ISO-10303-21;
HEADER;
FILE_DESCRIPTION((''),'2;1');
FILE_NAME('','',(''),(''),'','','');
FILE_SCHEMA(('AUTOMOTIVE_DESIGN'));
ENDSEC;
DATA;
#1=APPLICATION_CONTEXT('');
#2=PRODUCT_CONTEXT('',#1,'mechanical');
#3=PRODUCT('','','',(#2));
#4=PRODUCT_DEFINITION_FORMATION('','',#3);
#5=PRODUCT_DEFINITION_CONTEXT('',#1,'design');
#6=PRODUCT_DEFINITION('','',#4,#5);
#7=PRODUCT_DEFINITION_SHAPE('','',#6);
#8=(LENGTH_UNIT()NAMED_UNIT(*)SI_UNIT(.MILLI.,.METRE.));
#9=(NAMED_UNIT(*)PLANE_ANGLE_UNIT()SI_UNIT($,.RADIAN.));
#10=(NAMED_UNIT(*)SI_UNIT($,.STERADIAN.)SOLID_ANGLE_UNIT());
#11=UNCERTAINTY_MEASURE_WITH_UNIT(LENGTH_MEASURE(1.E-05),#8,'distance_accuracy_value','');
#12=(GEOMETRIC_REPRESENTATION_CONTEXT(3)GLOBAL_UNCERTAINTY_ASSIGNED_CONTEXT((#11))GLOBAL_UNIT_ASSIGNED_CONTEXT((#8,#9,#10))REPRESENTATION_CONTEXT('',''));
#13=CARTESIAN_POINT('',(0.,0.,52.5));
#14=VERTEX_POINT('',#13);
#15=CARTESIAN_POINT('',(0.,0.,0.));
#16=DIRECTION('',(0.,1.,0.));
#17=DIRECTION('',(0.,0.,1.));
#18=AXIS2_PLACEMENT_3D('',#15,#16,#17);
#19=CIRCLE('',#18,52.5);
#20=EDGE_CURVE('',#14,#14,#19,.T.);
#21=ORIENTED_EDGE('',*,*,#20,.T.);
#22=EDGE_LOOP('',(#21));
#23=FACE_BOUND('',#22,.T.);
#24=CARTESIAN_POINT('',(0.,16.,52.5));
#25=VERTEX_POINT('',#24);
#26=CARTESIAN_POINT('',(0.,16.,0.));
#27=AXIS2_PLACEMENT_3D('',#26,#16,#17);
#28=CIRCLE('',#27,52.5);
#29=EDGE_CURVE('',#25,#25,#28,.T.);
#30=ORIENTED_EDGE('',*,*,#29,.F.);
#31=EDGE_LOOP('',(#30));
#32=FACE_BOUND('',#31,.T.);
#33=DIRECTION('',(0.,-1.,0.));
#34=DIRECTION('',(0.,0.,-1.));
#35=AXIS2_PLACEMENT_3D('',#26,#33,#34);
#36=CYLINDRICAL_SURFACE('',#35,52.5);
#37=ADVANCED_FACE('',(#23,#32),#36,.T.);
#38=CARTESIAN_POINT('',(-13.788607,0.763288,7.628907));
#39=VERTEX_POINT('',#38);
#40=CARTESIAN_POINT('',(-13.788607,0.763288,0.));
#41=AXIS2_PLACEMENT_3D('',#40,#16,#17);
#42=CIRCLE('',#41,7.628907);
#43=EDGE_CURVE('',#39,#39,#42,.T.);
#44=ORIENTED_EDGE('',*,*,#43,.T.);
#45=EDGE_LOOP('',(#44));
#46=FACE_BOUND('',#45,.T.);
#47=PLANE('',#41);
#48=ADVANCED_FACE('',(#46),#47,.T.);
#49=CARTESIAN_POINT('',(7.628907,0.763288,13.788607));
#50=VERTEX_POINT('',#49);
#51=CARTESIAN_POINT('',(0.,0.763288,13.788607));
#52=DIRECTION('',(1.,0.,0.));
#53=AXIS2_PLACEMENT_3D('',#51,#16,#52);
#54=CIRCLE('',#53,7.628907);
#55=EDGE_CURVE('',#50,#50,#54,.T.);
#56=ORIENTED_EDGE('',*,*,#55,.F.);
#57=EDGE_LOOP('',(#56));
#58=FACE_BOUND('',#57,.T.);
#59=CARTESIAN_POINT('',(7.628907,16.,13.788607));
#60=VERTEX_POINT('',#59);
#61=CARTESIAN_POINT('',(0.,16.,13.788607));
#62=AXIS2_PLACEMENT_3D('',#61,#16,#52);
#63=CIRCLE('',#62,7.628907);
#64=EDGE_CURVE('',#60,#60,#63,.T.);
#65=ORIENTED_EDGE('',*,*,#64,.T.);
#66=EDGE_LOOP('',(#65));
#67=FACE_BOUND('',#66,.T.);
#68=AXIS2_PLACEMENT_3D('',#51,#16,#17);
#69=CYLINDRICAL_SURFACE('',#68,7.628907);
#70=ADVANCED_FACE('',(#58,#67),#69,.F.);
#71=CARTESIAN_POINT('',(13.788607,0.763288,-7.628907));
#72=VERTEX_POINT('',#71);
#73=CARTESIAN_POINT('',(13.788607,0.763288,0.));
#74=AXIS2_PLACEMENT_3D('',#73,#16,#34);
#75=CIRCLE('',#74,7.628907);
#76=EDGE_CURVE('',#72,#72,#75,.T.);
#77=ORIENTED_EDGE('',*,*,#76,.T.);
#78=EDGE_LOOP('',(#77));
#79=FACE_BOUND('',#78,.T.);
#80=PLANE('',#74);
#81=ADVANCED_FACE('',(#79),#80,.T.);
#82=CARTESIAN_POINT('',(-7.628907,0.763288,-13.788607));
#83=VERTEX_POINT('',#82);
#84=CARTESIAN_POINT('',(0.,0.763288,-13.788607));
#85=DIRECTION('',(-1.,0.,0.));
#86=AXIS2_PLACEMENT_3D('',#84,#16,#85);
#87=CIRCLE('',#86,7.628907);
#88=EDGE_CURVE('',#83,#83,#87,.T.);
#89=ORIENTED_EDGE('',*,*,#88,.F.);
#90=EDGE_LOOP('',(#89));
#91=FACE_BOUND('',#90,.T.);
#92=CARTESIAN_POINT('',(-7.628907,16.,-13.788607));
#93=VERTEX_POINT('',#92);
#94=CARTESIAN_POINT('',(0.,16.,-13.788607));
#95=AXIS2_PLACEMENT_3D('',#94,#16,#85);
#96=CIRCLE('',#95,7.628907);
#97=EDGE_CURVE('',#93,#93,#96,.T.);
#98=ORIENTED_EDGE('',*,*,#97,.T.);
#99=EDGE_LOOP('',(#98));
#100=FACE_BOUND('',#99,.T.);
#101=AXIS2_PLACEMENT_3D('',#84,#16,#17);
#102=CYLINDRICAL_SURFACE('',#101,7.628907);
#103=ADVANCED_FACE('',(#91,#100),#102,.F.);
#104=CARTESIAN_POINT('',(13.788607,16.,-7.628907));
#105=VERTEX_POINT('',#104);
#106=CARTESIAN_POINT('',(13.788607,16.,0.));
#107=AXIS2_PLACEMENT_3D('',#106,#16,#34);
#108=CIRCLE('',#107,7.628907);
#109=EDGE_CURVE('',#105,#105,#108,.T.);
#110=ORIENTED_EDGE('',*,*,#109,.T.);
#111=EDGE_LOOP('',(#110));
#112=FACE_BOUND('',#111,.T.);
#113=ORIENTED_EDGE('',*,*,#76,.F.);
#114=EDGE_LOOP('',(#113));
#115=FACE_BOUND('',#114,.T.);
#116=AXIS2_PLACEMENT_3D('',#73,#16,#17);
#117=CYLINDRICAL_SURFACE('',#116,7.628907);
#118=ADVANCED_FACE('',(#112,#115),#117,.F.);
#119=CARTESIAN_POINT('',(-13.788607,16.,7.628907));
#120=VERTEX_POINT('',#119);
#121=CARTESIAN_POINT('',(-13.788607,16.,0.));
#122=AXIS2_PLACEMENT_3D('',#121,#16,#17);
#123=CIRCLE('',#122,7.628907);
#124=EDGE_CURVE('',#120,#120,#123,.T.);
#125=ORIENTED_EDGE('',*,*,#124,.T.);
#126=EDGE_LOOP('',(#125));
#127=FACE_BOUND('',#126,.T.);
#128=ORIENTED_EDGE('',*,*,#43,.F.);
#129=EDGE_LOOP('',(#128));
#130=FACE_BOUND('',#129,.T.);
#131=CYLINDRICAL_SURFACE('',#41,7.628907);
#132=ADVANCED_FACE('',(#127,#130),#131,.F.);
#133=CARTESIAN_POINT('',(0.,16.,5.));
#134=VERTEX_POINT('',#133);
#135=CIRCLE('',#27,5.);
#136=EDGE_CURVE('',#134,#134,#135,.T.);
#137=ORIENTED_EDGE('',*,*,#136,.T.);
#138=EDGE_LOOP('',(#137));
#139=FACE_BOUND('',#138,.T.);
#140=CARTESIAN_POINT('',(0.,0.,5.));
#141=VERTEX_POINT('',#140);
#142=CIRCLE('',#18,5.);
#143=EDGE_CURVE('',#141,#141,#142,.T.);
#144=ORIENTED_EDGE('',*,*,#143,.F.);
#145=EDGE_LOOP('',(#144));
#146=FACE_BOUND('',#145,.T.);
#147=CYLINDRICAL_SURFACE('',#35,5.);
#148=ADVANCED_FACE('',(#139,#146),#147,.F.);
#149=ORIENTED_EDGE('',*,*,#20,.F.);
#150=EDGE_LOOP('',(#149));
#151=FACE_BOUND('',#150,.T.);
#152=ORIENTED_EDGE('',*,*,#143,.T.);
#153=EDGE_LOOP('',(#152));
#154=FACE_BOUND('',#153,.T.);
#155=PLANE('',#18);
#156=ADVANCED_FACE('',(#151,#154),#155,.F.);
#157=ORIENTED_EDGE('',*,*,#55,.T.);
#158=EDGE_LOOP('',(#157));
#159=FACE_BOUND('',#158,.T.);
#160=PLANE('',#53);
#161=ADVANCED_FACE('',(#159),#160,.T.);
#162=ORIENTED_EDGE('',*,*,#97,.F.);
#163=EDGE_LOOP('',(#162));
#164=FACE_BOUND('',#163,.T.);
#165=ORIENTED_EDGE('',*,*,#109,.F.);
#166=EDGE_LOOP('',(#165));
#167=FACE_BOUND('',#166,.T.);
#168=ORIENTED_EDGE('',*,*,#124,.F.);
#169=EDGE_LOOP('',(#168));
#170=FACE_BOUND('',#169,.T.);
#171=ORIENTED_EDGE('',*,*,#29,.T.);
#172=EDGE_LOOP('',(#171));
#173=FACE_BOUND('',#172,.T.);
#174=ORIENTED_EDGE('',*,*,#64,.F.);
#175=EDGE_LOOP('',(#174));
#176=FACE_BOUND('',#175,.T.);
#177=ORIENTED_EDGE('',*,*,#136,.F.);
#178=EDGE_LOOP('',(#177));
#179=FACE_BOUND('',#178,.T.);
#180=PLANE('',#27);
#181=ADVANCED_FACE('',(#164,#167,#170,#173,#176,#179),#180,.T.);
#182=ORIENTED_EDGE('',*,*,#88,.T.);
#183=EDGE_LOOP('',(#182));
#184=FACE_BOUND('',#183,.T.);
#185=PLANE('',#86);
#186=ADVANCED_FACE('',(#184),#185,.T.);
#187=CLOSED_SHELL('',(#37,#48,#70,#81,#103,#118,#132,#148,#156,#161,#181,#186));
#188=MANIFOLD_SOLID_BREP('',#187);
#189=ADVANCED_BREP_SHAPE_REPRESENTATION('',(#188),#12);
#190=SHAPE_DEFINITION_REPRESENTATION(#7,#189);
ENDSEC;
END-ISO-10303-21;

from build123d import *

# Parameters (mm, degrees)
SKETCH1_R           = 52.5
BOSS_EXTRUDE1_DEPTH = 16
SKETCH2_R           = 5
CUT_EXTRUDE1_DEPTH  = 76.950641867
SKETCH3_R           = 7.628906741
CUT_EXTRUDE2_DEPTH  = 15.236711819
CIRPATTERN1_COUNT   = 4


with BuildPart() as part:
    # Sketch1 → Boss-Extrude1 (new body)
    with BuildSketch(Plane(origin=(0, 0, 0), x_dir=(1, 0, 0), z_dir=(0, 1, 0))):
        Circle(SKETCH1_R)
    extrude(amount=BOSS_EXTRUDE1_DEPTH)

    # Sketch2 → Cut-Extrude1 (cut, through all)
    with BuildSketch(Plane(origin=(0, 0, 0), x_dir=(1, 0, 0), z_dir=(0, 1, 0))):
        Circle(SKETCH2_R)
    extrude(amount=CUT_EXTRUDE1_DEPTH, mode=Mode.SUBTRACT)

    # Sketch3 → Cut-Extrude2 (cut)
    with BuildSketch(Plane(origin=(0, 16, 0), x_dir=(1, 0, 0), z_dir=(0, 1, 0))):
        with Locations((-13.78860733, 0)):
            Circle(SKETCH3_R)
    cut_extrude2 = extrude(amount=-CUT_EXTRUDE2_DEPTH, mode=Mode.SUBTRACT)

    # CirPattern1: Cut-Extrude2 ×4 about axis
    cirpattern1_axis = Axis((0, 0, 0), (0, 1, 0))
    for i in range(1, CIRPATTERN1_COUNT):
        add(cut_extrude2.rotate(cirpattern1_axis, i * 360 / CIRPATTERN1_COUNT), mode=Mode.SUBTRACT)


solid = part.part
